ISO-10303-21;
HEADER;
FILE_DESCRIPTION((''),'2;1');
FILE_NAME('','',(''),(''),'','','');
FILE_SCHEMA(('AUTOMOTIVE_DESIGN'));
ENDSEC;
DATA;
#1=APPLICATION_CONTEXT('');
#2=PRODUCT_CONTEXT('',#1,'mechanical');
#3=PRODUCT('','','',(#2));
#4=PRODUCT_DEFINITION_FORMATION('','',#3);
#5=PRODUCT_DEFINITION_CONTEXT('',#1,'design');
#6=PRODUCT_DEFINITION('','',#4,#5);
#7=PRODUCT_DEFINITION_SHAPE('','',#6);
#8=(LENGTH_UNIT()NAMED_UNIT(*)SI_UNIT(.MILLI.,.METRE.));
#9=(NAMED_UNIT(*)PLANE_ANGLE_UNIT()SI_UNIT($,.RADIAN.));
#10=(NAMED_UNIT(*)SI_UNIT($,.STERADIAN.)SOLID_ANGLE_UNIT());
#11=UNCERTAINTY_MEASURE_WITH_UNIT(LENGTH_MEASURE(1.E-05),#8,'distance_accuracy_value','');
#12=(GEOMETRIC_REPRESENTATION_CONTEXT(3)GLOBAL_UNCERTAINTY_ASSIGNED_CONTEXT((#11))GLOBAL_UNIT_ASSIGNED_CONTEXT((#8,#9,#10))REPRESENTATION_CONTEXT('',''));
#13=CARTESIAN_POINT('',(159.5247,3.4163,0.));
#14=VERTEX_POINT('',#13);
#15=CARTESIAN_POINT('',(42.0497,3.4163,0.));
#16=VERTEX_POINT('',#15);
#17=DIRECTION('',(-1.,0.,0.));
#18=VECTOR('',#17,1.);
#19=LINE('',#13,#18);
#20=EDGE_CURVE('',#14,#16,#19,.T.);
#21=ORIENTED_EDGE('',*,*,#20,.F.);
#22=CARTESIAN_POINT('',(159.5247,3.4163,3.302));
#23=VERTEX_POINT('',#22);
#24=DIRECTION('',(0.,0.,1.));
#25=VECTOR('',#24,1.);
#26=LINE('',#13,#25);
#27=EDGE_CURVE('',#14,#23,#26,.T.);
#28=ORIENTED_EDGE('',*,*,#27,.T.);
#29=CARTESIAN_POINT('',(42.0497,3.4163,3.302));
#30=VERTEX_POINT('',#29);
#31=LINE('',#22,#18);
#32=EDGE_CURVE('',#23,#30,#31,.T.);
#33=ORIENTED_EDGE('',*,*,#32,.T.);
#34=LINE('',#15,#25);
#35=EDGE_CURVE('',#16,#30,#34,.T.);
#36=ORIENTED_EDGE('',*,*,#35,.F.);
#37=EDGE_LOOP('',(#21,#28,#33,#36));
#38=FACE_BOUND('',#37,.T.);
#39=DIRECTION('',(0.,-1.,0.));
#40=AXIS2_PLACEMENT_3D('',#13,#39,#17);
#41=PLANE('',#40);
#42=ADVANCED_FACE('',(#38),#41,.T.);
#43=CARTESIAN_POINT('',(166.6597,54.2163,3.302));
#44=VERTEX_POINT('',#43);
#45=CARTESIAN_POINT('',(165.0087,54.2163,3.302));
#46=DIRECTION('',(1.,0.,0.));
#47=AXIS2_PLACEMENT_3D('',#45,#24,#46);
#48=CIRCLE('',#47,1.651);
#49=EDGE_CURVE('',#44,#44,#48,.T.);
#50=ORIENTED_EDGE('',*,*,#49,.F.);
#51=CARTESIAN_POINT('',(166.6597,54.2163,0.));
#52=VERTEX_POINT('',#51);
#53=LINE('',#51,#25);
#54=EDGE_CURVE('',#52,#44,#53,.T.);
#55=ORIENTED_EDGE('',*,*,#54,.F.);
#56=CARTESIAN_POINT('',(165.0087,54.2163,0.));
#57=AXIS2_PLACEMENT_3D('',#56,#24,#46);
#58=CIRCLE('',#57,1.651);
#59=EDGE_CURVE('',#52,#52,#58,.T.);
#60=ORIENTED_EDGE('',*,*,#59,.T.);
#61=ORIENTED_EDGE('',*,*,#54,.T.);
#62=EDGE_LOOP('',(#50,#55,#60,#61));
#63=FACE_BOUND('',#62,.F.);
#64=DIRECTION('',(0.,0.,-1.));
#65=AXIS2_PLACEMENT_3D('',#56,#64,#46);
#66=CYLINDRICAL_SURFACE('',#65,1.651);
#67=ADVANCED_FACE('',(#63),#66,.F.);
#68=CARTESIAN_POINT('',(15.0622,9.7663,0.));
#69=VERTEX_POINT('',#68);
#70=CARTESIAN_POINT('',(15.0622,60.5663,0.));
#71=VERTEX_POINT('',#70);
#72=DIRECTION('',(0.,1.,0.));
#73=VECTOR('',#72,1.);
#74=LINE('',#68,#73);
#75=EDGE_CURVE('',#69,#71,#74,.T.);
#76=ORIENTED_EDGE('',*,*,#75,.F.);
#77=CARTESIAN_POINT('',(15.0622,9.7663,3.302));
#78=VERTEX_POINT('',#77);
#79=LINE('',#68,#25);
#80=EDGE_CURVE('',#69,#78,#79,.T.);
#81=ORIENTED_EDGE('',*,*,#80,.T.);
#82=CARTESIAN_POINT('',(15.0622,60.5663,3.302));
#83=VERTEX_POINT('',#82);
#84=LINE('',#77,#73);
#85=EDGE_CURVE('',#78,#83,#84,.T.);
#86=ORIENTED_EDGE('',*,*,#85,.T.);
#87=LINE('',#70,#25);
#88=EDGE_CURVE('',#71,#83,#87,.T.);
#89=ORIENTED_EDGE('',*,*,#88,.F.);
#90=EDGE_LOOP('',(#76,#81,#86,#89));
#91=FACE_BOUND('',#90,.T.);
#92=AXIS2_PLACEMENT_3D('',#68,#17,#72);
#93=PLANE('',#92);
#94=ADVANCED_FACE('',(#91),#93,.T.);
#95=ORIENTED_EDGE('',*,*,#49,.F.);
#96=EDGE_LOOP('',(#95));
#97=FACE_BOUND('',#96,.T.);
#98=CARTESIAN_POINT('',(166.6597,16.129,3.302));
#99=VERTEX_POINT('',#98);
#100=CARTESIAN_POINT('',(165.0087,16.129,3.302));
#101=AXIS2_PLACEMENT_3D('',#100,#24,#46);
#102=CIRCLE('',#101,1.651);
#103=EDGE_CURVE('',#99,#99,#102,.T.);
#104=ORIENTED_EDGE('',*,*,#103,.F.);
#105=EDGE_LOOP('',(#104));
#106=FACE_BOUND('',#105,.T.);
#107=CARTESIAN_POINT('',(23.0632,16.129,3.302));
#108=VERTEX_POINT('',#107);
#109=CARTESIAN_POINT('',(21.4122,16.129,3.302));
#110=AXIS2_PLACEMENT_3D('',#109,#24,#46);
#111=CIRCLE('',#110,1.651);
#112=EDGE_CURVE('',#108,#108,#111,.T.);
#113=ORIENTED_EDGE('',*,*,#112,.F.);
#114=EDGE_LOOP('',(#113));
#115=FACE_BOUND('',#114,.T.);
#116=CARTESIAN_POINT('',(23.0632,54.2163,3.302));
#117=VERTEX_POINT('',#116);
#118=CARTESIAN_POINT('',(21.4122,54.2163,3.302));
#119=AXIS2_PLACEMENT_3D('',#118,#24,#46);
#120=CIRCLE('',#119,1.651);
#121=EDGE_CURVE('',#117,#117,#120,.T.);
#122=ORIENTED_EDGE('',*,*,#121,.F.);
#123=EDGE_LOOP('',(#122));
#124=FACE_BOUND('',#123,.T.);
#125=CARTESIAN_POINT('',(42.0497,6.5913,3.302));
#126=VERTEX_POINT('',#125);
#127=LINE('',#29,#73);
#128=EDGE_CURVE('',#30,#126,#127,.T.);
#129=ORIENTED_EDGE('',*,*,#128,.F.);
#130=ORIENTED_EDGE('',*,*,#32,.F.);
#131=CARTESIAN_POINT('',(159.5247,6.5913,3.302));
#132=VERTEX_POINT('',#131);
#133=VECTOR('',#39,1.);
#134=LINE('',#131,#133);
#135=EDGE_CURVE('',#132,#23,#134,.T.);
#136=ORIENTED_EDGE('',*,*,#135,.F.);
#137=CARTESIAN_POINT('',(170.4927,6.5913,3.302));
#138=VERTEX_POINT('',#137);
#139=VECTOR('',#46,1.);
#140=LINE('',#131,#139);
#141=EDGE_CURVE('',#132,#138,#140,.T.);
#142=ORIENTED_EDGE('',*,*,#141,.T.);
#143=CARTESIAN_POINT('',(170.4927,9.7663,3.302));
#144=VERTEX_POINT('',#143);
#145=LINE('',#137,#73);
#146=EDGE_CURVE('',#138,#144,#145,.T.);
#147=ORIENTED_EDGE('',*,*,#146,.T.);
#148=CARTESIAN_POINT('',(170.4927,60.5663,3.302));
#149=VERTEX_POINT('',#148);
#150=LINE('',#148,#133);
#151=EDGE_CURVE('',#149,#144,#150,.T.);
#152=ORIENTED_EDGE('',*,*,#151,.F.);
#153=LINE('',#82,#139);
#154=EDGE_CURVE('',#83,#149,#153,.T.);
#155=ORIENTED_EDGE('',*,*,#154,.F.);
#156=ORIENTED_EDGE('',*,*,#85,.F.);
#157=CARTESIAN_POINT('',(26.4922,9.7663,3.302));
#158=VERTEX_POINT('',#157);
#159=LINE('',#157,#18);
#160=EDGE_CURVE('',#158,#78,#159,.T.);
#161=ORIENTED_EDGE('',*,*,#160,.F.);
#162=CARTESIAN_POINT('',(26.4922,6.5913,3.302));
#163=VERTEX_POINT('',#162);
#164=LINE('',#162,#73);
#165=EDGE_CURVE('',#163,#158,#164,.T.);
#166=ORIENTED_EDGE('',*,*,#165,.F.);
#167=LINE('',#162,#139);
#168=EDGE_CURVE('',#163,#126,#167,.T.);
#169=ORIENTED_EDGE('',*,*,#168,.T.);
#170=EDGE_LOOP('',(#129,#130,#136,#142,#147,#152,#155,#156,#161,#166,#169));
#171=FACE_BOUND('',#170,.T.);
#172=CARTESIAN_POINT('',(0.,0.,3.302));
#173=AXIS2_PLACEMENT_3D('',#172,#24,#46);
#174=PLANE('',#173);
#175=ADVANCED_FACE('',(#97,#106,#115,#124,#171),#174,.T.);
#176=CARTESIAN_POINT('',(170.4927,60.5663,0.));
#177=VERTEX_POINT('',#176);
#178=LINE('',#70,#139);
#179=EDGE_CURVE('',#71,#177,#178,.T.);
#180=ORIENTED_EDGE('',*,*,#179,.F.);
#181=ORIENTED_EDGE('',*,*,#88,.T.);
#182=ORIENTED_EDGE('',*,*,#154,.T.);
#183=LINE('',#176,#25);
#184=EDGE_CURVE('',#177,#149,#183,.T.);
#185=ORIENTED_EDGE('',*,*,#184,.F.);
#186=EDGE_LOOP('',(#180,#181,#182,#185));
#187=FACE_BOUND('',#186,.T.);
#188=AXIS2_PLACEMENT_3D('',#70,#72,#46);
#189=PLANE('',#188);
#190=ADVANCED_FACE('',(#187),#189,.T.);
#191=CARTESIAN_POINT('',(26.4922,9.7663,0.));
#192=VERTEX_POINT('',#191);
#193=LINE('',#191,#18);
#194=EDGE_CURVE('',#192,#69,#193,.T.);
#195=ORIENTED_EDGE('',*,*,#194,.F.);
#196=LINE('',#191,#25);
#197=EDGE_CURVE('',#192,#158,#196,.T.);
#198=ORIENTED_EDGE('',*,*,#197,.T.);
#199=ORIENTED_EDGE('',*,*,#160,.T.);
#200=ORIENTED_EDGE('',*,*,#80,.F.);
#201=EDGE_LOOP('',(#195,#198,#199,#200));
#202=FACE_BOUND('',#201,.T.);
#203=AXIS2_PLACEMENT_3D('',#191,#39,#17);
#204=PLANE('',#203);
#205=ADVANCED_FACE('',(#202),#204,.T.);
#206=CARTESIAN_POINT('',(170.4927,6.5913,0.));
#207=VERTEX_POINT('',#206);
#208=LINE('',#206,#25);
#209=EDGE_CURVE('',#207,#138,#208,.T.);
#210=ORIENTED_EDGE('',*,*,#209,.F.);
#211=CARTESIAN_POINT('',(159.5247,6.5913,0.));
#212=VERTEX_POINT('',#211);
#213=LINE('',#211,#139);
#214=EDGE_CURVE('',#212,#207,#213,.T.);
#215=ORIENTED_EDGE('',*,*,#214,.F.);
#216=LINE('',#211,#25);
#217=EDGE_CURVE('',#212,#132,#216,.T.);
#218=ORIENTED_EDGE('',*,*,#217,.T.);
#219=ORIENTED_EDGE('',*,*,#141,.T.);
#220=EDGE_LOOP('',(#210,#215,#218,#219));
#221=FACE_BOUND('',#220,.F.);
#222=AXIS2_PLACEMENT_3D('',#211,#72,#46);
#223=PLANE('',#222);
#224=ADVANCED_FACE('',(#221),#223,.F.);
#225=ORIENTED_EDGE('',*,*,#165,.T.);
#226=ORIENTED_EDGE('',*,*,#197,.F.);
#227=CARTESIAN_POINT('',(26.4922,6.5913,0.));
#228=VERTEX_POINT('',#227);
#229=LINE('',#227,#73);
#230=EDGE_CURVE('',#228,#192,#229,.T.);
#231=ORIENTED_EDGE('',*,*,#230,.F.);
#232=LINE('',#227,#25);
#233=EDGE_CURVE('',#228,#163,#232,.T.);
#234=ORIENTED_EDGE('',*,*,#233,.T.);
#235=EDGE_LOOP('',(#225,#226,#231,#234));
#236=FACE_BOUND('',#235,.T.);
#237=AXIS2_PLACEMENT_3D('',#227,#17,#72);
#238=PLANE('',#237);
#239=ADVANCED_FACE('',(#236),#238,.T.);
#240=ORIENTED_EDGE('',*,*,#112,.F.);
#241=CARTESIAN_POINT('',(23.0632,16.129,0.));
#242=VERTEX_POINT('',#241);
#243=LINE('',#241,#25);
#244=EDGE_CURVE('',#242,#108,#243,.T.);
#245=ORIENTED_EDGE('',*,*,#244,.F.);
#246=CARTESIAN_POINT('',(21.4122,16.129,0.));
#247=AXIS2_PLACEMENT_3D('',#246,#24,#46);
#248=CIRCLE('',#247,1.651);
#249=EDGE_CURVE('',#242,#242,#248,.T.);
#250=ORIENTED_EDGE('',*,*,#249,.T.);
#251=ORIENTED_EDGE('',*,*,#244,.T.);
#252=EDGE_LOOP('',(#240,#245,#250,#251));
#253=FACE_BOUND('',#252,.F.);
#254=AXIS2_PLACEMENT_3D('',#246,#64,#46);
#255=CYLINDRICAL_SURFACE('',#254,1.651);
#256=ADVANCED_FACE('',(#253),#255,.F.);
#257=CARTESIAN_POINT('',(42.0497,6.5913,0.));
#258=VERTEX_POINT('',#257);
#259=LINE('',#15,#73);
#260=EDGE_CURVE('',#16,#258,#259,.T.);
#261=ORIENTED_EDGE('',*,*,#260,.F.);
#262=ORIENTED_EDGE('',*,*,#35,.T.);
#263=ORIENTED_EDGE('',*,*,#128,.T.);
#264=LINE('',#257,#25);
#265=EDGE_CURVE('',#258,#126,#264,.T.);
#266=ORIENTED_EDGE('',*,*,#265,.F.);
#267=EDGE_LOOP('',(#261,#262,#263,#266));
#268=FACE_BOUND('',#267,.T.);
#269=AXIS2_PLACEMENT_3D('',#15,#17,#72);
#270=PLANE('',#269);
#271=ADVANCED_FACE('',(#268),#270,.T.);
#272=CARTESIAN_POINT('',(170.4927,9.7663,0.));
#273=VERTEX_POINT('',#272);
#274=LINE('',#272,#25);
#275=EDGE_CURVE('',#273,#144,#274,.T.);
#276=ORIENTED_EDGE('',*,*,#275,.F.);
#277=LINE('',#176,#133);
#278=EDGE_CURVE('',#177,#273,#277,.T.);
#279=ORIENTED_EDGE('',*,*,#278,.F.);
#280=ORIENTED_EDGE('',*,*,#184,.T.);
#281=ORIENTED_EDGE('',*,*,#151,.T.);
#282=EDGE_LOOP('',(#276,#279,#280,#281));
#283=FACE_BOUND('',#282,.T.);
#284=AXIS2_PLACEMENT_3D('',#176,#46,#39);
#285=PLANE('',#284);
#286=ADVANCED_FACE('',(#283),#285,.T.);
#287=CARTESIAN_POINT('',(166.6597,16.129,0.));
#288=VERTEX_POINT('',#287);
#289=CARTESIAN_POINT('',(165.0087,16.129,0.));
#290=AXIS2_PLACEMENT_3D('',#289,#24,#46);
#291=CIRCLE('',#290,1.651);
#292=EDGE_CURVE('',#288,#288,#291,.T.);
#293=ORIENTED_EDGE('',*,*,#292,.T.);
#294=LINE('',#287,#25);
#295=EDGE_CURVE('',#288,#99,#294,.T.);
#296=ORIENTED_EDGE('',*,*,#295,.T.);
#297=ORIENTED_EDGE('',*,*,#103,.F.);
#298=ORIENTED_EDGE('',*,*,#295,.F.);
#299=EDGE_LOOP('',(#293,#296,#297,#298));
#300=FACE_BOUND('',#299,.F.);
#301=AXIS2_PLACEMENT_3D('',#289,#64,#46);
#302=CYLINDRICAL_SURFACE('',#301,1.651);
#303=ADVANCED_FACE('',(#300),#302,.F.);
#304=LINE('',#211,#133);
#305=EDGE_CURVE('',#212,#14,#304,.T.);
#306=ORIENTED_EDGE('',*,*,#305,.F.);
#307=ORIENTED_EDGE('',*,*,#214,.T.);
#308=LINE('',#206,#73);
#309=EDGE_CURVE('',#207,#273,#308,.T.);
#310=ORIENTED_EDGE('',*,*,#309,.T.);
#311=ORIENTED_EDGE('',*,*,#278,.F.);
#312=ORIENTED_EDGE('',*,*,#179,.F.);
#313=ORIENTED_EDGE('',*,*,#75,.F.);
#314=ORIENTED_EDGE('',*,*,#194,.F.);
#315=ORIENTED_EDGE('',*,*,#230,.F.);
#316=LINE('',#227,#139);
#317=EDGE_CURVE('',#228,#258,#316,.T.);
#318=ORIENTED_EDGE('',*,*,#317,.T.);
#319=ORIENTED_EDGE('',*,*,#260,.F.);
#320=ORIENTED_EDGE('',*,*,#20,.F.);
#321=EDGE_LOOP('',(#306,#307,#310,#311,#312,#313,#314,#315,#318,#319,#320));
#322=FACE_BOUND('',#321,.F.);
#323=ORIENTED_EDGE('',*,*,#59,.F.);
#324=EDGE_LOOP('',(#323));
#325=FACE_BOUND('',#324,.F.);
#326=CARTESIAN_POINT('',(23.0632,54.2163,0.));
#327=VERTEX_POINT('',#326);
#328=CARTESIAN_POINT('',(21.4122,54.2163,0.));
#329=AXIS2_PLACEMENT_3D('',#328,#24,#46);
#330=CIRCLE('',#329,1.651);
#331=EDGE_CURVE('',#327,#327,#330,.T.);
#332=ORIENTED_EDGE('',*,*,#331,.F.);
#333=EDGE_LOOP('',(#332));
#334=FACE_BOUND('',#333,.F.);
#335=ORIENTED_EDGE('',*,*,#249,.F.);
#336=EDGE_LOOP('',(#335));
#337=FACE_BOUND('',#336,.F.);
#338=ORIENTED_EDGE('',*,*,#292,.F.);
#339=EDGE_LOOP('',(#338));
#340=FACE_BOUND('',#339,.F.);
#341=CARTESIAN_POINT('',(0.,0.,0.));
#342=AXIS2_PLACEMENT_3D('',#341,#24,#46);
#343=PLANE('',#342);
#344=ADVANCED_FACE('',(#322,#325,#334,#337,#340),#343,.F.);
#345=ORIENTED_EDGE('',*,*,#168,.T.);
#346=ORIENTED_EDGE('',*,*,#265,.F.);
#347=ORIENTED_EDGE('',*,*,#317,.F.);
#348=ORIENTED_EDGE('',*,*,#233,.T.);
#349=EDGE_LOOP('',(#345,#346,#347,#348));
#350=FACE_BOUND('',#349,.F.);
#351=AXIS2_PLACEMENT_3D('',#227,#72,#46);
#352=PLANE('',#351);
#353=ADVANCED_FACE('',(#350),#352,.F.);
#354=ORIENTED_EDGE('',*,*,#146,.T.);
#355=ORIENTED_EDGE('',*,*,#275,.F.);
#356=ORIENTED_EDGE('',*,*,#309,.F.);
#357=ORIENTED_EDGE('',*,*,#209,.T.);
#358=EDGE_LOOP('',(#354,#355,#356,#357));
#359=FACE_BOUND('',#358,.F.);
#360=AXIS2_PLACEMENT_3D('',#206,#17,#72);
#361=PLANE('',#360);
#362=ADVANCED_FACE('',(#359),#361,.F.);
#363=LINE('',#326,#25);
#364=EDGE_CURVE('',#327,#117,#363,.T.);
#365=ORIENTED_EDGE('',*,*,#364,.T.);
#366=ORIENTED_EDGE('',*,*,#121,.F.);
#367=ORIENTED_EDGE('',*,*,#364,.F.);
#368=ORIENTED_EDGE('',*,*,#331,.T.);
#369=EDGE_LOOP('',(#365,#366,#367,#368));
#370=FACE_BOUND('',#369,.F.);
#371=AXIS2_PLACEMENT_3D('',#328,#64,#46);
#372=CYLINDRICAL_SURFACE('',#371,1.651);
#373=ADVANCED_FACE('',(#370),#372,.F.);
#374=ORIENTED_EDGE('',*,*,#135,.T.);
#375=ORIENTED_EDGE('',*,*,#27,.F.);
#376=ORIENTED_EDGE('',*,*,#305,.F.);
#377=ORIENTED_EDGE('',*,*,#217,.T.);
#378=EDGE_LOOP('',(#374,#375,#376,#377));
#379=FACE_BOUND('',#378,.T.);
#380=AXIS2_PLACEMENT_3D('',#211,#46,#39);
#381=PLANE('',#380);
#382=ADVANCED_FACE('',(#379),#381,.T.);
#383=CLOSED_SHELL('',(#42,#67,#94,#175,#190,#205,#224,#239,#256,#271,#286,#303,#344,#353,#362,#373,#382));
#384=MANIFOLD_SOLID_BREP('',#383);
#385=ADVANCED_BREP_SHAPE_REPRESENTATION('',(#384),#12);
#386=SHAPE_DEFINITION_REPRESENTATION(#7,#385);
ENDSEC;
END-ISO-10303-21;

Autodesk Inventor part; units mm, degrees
ref_plane "YZ Plane" through (0, 0, 0) normal (1, 0, 0) x (0, 1, 0)
ref_plane "XZ Plane" through (0, 0, 0) normal (0, 1, 0) x (-1, 0, 0)
ref_plane "XY Plane" through (0, 0, 0) normal (0, 0, 1) x (1, 0, 0)
sketch "Sketch1" plane through (0, 0, 0) normal (0, 0, 1) x (1, 0, 0)
  line L0 (15.0622, 60.5663) -> (170.4927, 60.5663)
  line L1 (170.4927, 60.5663) -> (170.4927, 9.7663)
  line L2 (15.0622, 9.7663) -> (15.0622, 60.5663)
  line L3 (170.4927, 9.7663) -> (170.4927, 6.5913)
  line L4 (26.4922, 6.5913) -> (26.4922, 9.7663)
  line L5 (159.5247, 6.5913) -> (159.5247, 3.4163)
  line L6 (159.5247, 3.4163) -> (42.0497, 3.4163)
  line L7 (42.0497, 3.4163) -> (42.0497, 6.5913)
  circle A0 centre (21.4122, 54.2163) radius 1.651
  circle A1 centre (21.4122, 16.129) radius 1.651
  circle A2 centre (165.0087, 16.129) radius 1.651
  circle A3 centre (165.0087, 54.2163) radius 1.651
  line L8 (33.3756, 50.5714) -> (117.4496, 50.5714)
  line L9 (117.4496, 50.5714) -> (117.4496, 28.8544)
  line L10 (117.4496, 28.8544) -> (33.3756, 28.8544)
  line L11 (33.3756, 28.8544) -> (33.3756, 50.5714)
  line L12 (39.2811, 23.114) -> (50.0761, 23.114)
  line L13 (50.0761, 23.114) -> (50.0761, 12.319)
  line L14 (50.0761, 12.319) -> (39.2811, 12.319)
  line L15 (39.2811, 12.319) -> (39.2811, 23.114)
  line L16 (54.6481, 23.114) -> (65.4431, 23.114)
  line L17 (65.4431, 23.114) -> (65.4431, 12.319)
  line L18 (65.4431, 12.319) -> (54.6481, 12.319)
  line L19 (54.6481, 12.319) -> (54.6481, 23.114)
  line L20 (70.0151, 23.114) -> (80.8101, 23.114)
  line L21 (80.8101, 23.114) -> (80.8101, 12.319)
  line L22 (80.8101, 12.319) -> (70.0151, 12.319)
  line L23 (70.0151, 12.319) -> (70.0151, 23.114)
  line L24 (85.3821, 23.114) -> (96.1771, 23.114)
  line L25 (96.1771, 23.114) -> (96.1771, 12.319)
  line L26 (96.1771, 12.319) -> (85.3821, 12.319)
  line L27 (85.3821, 12.319) -> (85.3821, 23.114)
  line L28 (100.7491, 23.114) -> (111.5441, 23.114)
  line L29 (111.5441, 23.114) -> (111.5441, 12.319)
  line L30 (111.5441, 12.319) -> (100.7491, 12.319)
  line L31 (100.7491, 12.319) -> (100.7491, 23.114)
  line L32 (138.7221, 23.114) -> (149.5171, 23.114)
  line L33 (149.5171, 23.114) -> (149.5171, 12.319)
  line L34 (149.5171, 12.319) -> (138.7221, 12.319)
  line L35 (138.7221, 12.319) -> (138.7221, 23.114)
  line L36 (170.4927, 9.7663) -> (170.4927, 9.7663)
  line L37 (26.4922, 9.7663) -> (15.0622, 9.7663)
  line L38 (26.4922, 6.5913) -> (42.0497, 6.5913)
  line L39 (159.5247, 6.5913) -> (170.4927, 6.5913)
  circle A4 centre (144.1196, 41.5163) radius 3.4925
  line L40 (144.1196, 23.114) -> (144.1196, 12.319)
  circle A5 centre (44.6786, 17.7165) radius 5.3975
  circle A6 centre (60.0456, 17.7165) radius 5.3975
  circle A7 centre (75.4126, 17.7165) radius 5.3975
  circle A8 centre (90.7796, 17.7165) radius 5.3975
  circle A9 centre (106.1466, 17.7165) radius 5.3975
  circle A10 centre (144.1196, 17.7165) radius 5.3975
  dimension "d0" = 3.302
  dimension "d1" = 6.35
  dimension "d2" = 6.35
  dimension "d3" = 84.074
  dimension "d4" = 21.717
  dimension "d5" = 10.795
  dimension "d6" = 10.795
  dimension "d7" = 10.795
  dimension "d8" = 10.795
  dimension "d9" = 10.795
  dimension "d10" = 10.795
  dimension "d11" = 10.795
  dimension "d12" = 4.572
  dimension "d13" = 4.572
  dimension "d14" = 4.572
  dimension "d15" = 4.572
  dimension "d16" = 5.9055
  dimension "d17" = 5.9055
  dimension "d21" = 6.985
  dimension "d22" = 26.67
  dimension "d25" = 0
  dimension "d26" = 3.302
  dimension "d28" = 3.302
  dimension "d32" = 50.8
  dimension "d33" = 155.4305
  dimension "d34" = 6.35
  dimension "d39" = 26.373
  dimension "d40" = 19.05
  dimension "d41" = 29.6164
  dimension "d43" = 15.367
  dimension "d44" = 37.973
sketch "Sketch2" plane through (0, 0, 0) normal (0, 0, 1) x (1, 0, 0)
  line L0 (15.0622, 9.7663) -> (15.0622, 60.5663) projected
  line L1 (15.0622, 60.5663) -> (170.4927, 60.5663) projected
  line L2 (33.3756, 50.5714) -> (117.4496, 50.5714) projected
  line L3 (117.4496, 50.5714) -> (117.4496, 28.8544) projected
  line L4 (170.4927, 60.5663) -> (170.4927, 9.7663) projected
  line L5 (159.5247, 6.5913) -> (170.4927, 6.5913) projected
  line L6 (159.5247, 6.5913) -> (159.5247, 3.4163) projected
  line L7 (159.5247, 3.4163) -> (42.0497, 3.4163) projected
  line L8 (42.0497, 3.4163) -> (42.0497, 6.5913) projected
  line L9 (26.4922, 6.5913) -> (42.0497, 6.5913) projected
  line L10 (26.4922, 6.5913) -> (26.4922, 9.7663) projected
  line L11 (26.4922, 9.7663) -> (15.0622, 9.7663) projected
  circle A0 centre (21.4122, 16.129) radius 1.651 projected
  circle A1 centre (21.4122, 54.2163) radius 1.651 projected
  circle A2 centre (165.0087, 54.2163) radius 1.651 projected
  circle A3 centre (165.0087, 16.129) radius 1.651 projected
  line L12 (15.0622, 60.5663) -> (15.0622, 9.7663)
  line L13 (15.0622, 9.7663) -> (26.4922, 9.7663)
  line L14 (26.4922, 9.7663) -> (26.4922, 6.5913)
  line L15 (26.4922, 6.5913) -> (42.0497, 6.5913)
  line L16 (42.0497, 6.5913) -> (42.0497, 3.4163)
  line L17 (42.0497, 3.4163) -> (159.5247, 3.4163)
  line L18 (159.5247, 3.4163) -> (159.5247, 6.5913)
  line L19 (159.5247, 6.5913) -> (170.4927, 6.5913)
  line L20 (170.4927, 6.5913) -> (170.4927, 60.5663)
  line L21 (170.4927, 60.5663) -> (15.0622, 60.5663)
  circle A4 centre (21.4122, 54.2163) radius 1.651
  circle A5 centre (21.4122, 16.129) radius 1.651
  circle A6 centre (165.0087, 16.129) radius 1.651
  circle A7 centre (165.0087, 54.2163) radius 1.651
  point P0 (0, 0)
  point P1 (144.1196, 41.5163)
surface extrude "ExtrusionSrf1" sketch "Sketch1" along normal blind 3.302 shown yes curves L0 L1 L36 L3 L39 L5 L6 L7 L38 L4 L37 L2
extrude "Extrusion1" add sketch "Sketch2" along normal blind 3.302
equation "\"d35\" = d28"
equation "\"d37\" = d28"
properties part number "FP_PCB"
